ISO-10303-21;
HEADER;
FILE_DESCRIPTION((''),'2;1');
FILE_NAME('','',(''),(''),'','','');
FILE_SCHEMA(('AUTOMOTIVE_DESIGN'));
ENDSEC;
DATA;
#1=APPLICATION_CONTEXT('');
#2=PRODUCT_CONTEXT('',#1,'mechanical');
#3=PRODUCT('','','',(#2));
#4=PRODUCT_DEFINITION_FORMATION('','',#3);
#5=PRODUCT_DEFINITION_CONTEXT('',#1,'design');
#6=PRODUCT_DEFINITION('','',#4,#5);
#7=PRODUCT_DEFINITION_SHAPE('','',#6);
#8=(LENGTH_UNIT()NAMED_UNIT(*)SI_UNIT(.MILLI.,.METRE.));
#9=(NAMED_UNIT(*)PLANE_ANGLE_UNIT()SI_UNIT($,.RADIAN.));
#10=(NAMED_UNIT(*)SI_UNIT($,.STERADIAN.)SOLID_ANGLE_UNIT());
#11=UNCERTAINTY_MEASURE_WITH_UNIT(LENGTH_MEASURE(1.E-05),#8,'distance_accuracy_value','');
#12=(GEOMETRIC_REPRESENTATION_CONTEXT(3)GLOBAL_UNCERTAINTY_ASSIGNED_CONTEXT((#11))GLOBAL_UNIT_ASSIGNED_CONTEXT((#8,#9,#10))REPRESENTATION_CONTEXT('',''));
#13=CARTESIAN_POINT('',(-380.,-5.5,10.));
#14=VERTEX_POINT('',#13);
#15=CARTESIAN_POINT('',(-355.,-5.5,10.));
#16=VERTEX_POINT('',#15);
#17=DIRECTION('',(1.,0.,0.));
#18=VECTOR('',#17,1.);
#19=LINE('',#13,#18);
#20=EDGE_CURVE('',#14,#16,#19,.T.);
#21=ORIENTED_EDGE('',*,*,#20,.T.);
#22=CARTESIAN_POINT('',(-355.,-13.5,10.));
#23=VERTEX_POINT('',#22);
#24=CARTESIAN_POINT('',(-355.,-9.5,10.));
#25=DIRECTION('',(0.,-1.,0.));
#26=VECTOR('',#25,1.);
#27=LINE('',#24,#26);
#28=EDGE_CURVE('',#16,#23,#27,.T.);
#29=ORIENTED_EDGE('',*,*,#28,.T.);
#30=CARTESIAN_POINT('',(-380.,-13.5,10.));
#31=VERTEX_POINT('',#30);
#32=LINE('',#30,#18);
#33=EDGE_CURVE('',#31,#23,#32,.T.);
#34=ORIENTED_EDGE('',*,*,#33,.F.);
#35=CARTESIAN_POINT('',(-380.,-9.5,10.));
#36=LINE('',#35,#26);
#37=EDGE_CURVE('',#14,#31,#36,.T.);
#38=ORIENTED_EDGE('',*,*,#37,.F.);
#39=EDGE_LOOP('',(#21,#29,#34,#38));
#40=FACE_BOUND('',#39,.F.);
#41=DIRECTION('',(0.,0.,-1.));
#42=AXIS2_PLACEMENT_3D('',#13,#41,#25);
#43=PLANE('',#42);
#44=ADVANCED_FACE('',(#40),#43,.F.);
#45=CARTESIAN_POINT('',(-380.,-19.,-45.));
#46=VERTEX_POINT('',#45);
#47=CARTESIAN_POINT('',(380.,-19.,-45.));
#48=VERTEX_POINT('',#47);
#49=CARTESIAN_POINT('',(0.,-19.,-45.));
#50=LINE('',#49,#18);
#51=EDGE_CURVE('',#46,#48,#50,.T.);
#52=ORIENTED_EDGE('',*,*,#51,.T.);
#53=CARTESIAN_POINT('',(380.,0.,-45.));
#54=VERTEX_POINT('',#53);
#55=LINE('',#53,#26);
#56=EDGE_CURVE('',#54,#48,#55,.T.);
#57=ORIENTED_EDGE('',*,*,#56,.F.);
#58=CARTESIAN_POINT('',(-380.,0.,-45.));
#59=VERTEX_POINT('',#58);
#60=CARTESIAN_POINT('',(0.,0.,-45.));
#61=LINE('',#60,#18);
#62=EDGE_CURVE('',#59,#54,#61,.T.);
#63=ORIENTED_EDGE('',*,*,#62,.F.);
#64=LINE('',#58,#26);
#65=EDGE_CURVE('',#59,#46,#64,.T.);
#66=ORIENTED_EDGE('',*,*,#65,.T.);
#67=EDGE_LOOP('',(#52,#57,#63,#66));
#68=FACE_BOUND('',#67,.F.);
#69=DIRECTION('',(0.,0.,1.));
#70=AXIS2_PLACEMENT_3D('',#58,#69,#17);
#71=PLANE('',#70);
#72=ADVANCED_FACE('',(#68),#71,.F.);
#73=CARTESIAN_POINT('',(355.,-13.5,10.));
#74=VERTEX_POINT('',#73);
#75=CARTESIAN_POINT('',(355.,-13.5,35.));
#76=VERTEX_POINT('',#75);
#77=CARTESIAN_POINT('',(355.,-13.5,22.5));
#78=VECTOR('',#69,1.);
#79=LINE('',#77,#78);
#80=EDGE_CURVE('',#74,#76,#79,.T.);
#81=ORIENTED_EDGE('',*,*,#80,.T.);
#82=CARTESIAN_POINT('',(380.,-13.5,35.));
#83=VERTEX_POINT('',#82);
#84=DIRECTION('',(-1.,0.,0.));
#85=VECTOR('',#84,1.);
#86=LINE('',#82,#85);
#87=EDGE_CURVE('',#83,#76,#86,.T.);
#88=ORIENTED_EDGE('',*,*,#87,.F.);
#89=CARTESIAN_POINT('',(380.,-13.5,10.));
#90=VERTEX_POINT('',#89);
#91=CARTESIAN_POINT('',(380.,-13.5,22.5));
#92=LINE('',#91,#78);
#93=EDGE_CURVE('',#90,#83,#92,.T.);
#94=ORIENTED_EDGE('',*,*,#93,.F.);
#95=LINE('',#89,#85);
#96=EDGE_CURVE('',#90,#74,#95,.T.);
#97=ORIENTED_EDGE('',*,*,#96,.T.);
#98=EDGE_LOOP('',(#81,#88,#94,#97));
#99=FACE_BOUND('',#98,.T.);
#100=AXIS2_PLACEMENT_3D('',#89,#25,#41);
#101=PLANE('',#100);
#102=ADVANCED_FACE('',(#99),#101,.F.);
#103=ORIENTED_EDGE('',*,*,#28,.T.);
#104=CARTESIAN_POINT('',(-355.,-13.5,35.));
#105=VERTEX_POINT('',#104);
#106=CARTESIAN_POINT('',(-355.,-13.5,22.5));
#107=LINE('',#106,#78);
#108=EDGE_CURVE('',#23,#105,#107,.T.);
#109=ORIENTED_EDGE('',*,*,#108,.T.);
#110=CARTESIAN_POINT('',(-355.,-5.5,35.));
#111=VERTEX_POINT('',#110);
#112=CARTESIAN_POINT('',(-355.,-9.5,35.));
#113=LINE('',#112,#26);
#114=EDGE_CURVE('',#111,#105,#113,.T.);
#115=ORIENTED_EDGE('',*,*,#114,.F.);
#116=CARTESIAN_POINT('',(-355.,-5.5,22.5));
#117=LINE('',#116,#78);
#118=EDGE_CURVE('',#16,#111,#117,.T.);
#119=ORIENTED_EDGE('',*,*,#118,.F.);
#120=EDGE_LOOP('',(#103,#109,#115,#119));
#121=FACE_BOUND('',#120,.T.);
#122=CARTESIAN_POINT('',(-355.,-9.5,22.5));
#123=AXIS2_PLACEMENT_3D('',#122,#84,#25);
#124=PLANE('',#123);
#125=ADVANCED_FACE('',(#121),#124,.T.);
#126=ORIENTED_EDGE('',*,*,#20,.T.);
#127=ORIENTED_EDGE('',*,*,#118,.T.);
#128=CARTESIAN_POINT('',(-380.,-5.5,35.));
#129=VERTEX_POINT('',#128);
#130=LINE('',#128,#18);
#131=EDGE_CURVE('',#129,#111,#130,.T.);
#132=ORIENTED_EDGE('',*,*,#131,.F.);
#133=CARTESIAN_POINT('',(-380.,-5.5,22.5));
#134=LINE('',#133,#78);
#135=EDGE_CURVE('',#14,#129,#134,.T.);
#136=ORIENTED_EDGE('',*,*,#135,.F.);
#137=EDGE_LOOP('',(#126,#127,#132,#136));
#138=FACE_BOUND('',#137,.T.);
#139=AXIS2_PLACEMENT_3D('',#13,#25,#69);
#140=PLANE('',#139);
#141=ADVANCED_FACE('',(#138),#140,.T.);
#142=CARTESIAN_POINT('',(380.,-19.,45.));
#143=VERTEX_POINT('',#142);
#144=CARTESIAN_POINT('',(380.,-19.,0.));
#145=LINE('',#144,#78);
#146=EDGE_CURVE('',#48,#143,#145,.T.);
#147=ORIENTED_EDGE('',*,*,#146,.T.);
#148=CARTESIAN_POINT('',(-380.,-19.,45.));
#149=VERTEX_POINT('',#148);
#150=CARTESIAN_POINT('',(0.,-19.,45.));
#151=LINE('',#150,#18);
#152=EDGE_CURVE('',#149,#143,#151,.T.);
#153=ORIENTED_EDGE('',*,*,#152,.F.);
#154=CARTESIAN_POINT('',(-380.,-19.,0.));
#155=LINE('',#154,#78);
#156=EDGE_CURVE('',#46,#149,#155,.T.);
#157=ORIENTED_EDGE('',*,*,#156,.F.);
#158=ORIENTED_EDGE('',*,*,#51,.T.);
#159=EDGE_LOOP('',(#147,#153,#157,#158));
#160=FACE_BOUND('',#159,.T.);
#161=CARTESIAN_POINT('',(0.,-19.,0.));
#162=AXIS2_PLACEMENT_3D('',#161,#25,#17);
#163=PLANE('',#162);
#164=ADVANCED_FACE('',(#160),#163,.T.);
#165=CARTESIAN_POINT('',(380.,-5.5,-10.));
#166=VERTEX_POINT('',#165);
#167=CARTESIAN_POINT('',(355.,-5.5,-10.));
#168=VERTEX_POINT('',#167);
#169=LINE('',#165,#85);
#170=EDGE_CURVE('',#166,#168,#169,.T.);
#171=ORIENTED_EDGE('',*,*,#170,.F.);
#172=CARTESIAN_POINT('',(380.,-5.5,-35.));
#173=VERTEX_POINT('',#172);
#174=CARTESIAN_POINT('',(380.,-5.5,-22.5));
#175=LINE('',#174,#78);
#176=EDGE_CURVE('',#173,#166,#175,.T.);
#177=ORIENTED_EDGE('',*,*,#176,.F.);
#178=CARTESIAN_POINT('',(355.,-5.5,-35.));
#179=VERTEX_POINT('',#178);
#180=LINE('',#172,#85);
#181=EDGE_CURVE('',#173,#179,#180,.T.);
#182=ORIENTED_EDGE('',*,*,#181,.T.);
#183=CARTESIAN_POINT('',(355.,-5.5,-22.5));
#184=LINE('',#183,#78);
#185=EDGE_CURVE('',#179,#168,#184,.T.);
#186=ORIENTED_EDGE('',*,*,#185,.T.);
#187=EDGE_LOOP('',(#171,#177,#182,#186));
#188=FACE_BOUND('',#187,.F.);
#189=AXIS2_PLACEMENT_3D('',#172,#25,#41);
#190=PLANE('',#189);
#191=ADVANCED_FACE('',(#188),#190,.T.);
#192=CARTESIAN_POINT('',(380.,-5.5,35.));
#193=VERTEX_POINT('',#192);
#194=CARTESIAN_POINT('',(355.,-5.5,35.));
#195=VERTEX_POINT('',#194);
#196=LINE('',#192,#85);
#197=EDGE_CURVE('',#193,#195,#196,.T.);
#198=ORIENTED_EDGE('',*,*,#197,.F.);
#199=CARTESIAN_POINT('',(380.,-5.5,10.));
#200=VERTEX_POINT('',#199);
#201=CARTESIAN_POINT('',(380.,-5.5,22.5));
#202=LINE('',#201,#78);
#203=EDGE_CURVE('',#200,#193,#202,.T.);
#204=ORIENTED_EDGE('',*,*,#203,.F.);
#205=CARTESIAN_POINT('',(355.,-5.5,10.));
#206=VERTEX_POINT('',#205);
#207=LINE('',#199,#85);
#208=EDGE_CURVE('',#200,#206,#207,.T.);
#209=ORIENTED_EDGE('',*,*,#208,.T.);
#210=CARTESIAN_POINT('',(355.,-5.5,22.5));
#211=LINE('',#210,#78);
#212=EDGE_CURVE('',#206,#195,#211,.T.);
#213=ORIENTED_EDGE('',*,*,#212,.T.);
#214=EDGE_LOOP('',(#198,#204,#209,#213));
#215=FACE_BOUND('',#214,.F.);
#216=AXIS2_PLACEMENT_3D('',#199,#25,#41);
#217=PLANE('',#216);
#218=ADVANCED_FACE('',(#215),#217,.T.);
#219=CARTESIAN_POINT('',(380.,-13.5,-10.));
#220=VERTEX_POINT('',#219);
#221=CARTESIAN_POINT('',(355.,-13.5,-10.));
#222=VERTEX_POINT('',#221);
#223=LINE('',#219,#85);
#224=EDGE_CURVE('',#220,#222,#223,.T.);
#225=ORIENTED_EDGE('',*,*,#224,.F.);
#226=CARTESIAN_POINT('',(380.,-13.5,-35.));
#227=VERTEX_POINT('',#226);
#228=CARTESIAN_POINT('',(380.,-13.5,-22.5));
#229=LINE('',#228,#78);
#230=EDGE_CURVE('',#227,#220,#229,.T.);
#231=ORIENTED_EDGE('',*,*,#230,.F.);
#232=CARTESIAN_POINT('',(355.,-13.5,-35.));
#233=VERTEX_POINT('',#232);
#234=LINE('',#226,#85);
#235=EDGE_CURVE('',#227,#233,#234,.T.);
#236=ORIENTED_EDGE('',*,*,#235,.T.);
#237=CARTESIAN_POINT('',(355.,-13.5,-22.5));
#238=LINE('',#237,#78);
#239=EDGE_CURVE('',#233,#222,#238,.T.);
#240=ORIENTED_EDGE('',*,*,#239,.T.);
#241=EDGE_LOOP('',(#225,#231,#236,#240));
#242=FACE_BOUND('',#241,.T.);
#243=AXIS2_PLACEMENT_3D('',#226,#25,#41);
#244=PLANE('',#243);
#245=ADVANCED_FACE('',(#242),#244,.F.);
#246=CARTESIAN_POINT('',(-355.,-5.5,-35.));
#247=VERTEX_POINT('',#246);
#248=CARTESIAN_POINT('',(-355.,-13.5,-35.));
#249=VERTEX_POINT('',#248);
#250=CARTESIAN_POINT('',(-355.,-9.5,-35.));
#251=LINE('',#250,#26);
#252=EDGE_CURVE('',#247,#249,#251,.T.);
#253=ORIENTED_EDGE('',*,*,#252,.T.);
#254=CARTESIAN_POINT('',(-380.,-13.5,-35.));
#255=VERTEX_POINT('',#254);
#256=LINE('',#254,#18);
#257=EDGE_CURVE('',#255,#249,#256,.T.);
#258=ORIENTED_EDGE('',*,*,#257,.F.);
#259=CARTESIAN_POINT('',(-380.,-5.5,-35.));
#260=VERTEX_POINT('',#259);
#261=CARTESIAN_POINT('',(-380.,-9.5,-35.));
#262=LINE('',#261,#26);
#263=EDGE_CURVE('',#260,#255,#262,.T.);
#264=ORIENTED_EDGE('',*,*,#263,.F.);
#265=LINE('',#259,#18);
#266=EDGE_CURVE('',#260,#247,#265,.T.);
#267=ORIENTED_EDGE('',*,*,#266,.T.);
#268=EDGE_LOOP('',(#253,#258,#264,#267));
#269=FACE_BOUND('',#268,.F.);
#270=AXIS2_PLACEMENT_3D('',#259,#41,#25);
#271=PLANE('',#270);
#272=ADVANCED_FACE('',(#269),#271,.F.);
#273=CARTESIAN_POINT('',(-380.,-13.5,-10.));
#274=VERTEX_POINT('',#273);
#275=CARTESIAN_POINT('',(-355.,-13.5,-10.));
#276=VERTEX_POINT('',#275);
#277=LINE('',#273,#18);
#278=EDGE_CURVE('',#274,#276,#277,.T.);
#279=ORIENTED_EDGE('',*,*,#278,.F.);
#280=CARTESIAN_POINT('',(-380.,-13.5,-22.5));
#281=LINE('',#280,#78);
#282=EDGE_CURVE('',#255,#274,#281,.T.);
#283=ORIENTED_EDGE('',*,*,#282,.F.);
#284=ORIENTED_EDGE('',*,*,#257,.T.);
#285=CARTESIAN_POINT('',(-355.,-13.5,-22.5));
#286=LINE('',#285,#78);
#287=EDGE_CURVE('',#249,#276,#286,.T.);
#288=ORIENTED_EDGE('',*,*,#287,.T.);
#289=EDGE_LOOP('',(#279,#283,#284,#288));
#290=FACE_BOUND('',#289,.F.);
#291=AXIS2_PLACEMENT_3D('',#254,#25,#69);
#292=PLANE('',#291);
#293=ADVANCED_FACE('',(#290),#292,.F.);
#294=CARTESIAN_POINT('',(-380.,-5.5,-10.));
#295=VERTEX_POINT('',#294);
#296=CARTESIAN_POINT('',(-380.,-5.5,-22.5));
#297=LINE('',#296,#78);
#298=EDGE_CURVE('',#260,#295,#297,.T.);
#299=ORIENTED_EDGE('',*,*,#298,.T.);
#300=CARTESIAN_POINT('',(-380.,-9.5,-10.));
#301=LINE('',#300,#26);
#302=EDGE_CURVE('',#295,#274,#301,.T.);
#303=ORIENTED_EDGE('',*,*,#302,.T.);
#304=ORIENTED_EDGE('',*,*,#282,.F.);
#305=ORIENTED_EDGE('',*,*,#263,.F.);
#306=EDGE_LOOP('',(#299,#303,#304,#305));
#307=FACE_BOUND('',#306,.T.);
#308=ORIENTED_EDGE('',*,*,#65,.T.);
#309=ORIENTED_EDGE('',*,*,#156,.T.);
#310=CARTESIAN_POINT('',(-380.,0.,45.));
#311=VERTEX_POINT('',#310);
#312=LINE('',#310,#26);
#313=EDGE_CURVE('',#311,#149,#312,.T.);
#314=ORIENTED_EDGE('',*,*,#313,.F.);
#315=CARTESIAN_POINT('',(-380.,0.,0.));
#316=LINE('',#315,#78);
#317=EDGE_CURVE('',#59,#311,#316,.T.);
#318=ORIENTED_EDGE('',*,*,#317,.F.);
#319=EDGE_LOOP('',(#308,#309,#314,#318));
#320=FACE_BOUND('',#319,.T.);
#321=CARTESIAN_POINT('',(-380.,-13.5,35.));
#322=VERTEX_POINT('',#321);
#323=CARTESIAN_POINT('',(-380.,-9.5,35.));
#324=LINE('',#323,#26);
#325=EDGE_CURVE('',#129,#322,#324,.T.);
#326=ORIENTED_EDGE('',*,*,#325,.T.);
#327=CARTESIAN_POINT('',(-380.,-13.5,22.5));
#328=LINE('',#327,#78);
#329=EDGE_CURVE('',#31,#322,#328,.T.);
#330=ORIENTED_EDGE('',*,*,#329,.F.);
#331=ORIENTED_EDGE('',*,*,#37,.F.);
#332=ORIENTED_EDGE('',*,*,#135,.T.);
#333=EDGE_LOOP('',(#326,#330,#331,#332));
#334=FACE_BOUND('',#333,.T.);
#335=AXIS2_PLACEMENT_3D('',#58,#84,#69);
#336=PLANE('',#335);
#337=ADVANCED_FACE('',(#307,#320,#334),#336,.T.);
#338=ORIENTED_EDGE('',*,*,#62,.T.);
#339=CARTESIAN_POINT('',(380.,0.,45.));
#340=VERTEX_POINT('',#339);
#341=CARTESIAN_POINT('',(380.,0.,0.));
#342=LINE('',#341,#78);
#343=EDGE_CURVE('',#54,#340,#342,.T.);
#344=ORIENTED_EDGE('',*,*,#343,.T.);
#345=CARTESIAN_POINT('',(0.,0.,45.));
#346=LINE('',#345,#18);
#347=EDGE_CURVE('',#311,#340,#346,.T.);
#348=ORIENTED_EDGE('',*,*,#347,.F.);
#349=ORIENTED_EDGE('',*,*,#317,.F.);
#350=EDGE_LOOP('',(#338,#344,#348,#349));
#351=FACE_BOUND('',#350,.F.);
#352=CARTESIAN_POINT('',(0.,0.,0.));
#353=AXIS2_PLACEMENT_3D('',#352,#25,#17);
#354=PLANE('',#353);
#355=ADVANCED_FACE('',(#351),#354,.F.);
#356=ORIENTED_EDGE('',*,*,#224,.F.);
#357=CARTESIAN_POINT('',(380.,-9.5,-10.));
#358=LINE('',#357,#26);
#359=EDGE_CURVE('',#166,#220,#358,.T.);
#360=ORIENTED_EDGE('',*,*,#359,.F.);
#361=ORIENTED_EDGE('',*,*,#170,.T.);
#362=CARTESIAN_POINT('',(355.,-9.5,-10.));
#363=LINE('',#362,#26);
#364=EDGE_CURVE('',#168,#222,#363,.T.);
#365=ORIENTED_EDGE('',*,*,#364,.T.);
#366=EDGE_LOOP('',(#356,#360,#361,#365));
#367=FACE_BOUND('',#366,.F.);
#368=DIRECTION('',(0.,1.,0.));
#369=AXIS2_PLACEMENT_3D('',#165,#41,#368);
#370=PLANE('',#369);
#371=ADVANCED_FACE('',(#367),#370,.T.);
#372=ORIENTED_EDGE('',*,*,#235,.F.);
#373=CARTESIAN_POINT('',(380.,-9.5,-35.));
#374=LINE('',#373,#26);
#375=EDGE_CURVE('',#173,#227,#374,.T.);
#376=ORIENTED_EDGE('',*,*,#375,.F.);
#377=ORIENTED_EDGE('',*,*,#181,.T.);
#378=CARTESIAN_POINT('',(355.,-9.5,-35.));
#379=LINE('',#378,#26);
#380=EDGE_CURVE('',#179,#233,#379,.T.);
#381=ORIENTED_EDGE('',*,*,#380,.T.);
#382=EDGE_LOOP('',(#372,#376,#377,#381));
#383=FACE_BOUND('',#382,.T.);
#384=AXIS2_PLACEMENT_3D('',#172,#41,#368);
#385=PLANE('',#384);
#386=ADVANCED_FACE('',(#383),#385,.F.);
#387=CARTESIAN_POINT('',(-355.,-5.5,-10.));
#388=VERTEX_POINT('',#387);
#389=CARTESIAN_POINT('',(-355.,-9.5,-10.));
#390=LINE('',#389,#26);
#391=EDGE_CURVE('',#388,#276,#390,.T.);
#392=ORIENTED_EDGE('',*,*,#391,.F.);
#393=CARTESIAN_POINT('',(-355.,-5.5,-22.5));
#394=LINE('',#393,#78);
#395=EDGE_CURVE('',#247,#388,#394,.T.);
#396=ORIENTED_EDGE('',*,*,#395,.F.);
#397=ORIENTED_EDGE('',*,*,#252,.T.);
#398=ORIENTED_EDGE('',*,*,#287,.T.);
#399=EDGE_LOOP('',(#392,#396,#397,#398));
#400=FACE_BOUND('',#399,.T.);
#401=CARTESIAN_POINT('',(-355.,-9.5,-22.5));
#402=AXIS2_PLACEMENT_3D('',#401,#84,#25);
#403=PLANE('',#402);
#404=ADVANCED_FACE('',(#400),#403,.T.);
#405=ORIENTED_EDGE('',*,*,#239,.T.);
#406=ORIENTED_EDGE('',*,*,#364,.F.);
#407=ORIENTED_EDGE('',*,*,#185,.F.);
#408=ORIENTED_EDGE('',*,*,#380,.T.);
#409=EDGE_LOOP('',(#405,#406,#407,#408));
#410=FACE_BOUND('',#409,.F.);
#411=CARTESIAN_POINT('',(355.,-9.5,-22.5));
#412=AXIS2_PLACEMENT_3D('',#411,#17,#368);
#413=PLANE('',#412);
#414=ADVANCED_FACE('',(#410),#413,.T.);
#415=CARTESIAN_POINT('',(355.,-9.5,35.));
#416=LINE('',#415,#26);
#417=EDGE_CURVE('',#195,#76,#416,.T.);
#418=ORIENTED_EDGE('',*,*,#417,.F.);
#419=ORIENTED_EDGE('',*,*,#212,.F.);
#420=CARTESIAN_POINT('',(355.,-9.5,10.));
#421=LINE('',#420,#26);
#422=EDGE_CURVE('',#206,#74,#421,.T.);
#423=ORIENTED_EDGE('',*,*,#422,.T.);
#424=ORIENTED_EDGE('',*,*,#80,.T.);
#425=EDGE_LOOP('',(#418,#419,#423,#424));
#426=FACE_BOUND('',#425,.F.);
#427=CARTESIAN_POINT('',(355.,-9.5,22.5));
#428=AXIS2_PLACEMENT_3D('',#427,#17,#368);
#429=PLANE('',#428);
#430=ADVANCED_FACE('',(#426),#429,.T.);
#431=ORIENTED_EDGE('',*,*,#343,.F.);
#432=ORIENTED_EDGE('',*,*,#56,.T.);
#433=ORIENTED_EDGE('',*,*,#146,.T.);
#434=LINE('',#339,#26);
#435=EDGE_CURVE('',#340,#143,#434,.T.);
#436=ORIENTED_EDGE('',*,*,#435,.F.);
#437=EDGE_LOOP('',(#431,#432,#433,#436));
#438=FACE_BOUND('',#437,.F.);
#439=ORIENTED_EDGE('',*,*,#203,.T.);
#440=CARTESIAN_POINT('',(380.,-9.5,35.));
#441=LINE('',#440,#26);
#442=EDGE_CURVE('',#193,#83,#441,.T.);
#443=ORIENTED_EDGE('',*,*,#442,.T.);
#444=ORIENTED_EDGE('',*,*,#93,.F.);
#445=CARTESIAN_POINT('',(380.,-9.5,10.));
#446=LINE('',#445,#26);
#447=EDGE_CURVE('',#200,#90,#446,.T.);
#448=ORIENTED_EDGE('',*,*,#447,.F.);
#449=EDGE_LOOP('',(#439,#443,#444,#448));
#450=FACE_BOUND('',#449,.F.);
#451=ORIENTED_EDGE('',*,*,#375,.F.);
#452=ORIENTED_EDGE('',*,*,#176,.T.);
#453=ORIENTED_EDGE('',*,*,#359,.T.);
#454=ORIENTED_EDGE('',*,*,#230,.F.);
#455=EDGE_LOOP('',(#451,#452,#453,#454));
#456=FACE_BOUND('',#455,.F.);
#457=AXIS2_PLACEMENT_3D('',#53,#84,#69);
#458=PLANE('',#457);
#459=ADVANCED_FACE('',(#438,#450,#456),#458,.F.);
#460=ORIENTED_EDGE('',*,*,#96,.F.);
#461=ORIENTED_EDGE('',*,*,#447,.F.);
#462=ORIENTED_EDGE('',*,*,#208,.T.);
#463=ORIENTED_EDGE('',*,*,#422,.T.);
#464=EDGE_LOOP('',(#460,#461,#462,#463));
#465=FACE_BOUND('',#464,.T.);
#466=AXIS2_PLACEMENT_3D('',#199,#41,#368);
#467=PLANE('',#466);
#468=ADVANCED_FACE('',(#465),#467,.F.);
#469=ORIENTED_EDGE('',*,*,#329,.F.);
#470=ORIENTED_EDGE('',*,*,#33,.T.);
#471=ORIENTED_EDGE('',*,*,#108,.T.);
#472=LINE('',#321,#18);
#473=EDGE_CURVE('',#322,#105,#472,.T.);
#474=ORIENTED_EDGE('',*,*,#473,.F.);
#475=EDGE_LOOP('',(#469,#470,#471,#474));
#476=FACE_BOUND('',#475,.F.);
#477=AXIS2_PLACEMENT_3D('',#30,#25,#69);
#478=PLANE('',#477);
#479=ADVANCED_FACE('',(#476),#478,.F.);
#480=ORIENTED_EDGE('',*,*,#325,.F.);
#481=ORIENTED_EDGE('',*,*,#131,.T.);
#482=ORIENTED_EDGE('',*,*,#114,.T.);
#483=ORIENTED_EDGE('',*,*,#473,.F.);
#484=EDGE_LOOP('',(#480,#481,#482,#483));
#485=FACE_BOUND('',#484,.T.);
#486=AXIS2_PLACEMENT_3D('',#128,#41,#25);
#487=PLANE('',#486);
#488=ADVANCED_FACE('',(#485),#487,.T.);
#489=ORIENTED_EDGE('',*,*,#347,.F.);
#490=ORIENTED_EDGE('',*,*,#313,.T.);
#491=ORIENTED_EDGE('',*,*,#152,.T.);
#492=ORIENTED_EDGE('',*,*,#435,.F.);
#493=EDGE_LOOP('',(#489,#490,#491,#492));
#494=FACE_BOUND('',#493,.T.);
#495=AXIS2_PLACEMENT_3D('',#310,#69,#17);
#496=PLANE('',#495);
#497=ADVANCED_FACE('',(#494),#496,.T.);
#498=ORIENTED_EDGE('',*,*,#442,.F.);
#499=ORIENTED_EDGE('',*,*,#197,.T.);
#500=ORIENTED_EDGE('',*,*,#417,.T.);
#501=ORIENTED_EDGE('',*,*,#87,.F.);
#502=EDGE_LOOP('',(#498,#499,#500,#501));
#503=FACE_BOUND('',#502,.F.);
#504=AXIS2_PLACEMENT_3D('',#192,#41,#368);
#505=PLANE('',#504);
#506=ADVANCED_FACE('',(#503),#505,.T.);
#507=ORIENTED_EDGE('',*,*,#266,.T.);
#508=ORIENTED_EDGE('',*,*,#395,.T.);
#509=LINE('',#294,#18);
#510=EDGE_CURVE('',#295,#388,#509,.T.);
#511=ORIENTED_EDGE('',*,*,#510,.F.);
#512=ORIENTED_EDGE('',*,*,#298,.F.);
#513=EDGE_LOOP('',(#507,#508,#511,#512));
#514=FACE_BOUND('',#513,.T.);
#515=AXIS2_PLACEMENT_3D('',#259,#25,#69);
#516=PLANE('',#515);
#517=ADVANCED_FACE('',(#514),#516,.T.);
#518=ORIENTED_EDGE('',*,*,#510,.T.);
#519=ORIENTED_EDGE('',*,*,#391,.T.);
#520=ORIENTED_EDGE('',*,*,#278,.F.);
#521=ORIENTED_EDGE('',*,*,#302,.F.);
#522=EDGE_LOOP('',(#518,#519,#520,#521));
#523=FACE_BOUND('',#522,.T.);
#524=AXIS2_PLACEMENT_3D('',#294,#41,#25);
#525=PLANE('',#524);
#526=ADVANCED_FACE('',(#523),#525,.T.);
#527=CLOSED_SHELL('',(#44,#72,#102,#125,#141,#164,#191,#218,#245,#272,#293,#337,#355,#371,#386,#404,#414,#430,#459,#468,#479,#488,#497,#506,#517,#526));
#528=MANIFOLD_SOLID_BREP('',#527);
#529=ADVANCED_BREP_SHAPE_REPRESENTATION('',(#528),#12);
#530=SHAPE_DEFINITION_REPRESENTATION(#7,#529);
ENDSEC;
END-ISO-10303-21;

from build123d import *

# Parameters (mm, degrees)
F0_W     = 760
F0_H     = 90
F1_DEPTH = 19
F2_W     = 8
F2_H     = 25
F3_DEPTH = 25


# Not quite as in the source:
# - a pattern or mirror of a feature is missing from the dataset's text; its kind, count and spacing are read off the source's solid


with BuildPart() as f1:
    # F0 (on Front) → F1 (new body)
    with BuildSketch(Plane.XZ):
        Rectangle(F0_W, F0_H)
    extrude(amount=F1_DEPTH)

    # F2 (on face) → F3 (cut)
    with BuildSketch(Plane(origin=(-380, 0, 0), x_dir=(0, -1, 0), z_dir=(-1, 0, 0))):
        with Locations((9.5, 22.5)):
            Rectangle(F2_W, F2_H)
        with Locations((9.5, -22.5)):
            Rectangle(F2_W, F2_H)
    f3 = extrude(amount=-F3_DEPTH, mode=Mode.SUBTRACT)

    # F3_copies: F3 across plane
    add(f3.mirror(Plane(origin=(0, 0, 0), x_dir=(0, 0, 1), z_dir=(1, 0, 0))), mode=Mode.SUBTRACT)


solid = f1.part
